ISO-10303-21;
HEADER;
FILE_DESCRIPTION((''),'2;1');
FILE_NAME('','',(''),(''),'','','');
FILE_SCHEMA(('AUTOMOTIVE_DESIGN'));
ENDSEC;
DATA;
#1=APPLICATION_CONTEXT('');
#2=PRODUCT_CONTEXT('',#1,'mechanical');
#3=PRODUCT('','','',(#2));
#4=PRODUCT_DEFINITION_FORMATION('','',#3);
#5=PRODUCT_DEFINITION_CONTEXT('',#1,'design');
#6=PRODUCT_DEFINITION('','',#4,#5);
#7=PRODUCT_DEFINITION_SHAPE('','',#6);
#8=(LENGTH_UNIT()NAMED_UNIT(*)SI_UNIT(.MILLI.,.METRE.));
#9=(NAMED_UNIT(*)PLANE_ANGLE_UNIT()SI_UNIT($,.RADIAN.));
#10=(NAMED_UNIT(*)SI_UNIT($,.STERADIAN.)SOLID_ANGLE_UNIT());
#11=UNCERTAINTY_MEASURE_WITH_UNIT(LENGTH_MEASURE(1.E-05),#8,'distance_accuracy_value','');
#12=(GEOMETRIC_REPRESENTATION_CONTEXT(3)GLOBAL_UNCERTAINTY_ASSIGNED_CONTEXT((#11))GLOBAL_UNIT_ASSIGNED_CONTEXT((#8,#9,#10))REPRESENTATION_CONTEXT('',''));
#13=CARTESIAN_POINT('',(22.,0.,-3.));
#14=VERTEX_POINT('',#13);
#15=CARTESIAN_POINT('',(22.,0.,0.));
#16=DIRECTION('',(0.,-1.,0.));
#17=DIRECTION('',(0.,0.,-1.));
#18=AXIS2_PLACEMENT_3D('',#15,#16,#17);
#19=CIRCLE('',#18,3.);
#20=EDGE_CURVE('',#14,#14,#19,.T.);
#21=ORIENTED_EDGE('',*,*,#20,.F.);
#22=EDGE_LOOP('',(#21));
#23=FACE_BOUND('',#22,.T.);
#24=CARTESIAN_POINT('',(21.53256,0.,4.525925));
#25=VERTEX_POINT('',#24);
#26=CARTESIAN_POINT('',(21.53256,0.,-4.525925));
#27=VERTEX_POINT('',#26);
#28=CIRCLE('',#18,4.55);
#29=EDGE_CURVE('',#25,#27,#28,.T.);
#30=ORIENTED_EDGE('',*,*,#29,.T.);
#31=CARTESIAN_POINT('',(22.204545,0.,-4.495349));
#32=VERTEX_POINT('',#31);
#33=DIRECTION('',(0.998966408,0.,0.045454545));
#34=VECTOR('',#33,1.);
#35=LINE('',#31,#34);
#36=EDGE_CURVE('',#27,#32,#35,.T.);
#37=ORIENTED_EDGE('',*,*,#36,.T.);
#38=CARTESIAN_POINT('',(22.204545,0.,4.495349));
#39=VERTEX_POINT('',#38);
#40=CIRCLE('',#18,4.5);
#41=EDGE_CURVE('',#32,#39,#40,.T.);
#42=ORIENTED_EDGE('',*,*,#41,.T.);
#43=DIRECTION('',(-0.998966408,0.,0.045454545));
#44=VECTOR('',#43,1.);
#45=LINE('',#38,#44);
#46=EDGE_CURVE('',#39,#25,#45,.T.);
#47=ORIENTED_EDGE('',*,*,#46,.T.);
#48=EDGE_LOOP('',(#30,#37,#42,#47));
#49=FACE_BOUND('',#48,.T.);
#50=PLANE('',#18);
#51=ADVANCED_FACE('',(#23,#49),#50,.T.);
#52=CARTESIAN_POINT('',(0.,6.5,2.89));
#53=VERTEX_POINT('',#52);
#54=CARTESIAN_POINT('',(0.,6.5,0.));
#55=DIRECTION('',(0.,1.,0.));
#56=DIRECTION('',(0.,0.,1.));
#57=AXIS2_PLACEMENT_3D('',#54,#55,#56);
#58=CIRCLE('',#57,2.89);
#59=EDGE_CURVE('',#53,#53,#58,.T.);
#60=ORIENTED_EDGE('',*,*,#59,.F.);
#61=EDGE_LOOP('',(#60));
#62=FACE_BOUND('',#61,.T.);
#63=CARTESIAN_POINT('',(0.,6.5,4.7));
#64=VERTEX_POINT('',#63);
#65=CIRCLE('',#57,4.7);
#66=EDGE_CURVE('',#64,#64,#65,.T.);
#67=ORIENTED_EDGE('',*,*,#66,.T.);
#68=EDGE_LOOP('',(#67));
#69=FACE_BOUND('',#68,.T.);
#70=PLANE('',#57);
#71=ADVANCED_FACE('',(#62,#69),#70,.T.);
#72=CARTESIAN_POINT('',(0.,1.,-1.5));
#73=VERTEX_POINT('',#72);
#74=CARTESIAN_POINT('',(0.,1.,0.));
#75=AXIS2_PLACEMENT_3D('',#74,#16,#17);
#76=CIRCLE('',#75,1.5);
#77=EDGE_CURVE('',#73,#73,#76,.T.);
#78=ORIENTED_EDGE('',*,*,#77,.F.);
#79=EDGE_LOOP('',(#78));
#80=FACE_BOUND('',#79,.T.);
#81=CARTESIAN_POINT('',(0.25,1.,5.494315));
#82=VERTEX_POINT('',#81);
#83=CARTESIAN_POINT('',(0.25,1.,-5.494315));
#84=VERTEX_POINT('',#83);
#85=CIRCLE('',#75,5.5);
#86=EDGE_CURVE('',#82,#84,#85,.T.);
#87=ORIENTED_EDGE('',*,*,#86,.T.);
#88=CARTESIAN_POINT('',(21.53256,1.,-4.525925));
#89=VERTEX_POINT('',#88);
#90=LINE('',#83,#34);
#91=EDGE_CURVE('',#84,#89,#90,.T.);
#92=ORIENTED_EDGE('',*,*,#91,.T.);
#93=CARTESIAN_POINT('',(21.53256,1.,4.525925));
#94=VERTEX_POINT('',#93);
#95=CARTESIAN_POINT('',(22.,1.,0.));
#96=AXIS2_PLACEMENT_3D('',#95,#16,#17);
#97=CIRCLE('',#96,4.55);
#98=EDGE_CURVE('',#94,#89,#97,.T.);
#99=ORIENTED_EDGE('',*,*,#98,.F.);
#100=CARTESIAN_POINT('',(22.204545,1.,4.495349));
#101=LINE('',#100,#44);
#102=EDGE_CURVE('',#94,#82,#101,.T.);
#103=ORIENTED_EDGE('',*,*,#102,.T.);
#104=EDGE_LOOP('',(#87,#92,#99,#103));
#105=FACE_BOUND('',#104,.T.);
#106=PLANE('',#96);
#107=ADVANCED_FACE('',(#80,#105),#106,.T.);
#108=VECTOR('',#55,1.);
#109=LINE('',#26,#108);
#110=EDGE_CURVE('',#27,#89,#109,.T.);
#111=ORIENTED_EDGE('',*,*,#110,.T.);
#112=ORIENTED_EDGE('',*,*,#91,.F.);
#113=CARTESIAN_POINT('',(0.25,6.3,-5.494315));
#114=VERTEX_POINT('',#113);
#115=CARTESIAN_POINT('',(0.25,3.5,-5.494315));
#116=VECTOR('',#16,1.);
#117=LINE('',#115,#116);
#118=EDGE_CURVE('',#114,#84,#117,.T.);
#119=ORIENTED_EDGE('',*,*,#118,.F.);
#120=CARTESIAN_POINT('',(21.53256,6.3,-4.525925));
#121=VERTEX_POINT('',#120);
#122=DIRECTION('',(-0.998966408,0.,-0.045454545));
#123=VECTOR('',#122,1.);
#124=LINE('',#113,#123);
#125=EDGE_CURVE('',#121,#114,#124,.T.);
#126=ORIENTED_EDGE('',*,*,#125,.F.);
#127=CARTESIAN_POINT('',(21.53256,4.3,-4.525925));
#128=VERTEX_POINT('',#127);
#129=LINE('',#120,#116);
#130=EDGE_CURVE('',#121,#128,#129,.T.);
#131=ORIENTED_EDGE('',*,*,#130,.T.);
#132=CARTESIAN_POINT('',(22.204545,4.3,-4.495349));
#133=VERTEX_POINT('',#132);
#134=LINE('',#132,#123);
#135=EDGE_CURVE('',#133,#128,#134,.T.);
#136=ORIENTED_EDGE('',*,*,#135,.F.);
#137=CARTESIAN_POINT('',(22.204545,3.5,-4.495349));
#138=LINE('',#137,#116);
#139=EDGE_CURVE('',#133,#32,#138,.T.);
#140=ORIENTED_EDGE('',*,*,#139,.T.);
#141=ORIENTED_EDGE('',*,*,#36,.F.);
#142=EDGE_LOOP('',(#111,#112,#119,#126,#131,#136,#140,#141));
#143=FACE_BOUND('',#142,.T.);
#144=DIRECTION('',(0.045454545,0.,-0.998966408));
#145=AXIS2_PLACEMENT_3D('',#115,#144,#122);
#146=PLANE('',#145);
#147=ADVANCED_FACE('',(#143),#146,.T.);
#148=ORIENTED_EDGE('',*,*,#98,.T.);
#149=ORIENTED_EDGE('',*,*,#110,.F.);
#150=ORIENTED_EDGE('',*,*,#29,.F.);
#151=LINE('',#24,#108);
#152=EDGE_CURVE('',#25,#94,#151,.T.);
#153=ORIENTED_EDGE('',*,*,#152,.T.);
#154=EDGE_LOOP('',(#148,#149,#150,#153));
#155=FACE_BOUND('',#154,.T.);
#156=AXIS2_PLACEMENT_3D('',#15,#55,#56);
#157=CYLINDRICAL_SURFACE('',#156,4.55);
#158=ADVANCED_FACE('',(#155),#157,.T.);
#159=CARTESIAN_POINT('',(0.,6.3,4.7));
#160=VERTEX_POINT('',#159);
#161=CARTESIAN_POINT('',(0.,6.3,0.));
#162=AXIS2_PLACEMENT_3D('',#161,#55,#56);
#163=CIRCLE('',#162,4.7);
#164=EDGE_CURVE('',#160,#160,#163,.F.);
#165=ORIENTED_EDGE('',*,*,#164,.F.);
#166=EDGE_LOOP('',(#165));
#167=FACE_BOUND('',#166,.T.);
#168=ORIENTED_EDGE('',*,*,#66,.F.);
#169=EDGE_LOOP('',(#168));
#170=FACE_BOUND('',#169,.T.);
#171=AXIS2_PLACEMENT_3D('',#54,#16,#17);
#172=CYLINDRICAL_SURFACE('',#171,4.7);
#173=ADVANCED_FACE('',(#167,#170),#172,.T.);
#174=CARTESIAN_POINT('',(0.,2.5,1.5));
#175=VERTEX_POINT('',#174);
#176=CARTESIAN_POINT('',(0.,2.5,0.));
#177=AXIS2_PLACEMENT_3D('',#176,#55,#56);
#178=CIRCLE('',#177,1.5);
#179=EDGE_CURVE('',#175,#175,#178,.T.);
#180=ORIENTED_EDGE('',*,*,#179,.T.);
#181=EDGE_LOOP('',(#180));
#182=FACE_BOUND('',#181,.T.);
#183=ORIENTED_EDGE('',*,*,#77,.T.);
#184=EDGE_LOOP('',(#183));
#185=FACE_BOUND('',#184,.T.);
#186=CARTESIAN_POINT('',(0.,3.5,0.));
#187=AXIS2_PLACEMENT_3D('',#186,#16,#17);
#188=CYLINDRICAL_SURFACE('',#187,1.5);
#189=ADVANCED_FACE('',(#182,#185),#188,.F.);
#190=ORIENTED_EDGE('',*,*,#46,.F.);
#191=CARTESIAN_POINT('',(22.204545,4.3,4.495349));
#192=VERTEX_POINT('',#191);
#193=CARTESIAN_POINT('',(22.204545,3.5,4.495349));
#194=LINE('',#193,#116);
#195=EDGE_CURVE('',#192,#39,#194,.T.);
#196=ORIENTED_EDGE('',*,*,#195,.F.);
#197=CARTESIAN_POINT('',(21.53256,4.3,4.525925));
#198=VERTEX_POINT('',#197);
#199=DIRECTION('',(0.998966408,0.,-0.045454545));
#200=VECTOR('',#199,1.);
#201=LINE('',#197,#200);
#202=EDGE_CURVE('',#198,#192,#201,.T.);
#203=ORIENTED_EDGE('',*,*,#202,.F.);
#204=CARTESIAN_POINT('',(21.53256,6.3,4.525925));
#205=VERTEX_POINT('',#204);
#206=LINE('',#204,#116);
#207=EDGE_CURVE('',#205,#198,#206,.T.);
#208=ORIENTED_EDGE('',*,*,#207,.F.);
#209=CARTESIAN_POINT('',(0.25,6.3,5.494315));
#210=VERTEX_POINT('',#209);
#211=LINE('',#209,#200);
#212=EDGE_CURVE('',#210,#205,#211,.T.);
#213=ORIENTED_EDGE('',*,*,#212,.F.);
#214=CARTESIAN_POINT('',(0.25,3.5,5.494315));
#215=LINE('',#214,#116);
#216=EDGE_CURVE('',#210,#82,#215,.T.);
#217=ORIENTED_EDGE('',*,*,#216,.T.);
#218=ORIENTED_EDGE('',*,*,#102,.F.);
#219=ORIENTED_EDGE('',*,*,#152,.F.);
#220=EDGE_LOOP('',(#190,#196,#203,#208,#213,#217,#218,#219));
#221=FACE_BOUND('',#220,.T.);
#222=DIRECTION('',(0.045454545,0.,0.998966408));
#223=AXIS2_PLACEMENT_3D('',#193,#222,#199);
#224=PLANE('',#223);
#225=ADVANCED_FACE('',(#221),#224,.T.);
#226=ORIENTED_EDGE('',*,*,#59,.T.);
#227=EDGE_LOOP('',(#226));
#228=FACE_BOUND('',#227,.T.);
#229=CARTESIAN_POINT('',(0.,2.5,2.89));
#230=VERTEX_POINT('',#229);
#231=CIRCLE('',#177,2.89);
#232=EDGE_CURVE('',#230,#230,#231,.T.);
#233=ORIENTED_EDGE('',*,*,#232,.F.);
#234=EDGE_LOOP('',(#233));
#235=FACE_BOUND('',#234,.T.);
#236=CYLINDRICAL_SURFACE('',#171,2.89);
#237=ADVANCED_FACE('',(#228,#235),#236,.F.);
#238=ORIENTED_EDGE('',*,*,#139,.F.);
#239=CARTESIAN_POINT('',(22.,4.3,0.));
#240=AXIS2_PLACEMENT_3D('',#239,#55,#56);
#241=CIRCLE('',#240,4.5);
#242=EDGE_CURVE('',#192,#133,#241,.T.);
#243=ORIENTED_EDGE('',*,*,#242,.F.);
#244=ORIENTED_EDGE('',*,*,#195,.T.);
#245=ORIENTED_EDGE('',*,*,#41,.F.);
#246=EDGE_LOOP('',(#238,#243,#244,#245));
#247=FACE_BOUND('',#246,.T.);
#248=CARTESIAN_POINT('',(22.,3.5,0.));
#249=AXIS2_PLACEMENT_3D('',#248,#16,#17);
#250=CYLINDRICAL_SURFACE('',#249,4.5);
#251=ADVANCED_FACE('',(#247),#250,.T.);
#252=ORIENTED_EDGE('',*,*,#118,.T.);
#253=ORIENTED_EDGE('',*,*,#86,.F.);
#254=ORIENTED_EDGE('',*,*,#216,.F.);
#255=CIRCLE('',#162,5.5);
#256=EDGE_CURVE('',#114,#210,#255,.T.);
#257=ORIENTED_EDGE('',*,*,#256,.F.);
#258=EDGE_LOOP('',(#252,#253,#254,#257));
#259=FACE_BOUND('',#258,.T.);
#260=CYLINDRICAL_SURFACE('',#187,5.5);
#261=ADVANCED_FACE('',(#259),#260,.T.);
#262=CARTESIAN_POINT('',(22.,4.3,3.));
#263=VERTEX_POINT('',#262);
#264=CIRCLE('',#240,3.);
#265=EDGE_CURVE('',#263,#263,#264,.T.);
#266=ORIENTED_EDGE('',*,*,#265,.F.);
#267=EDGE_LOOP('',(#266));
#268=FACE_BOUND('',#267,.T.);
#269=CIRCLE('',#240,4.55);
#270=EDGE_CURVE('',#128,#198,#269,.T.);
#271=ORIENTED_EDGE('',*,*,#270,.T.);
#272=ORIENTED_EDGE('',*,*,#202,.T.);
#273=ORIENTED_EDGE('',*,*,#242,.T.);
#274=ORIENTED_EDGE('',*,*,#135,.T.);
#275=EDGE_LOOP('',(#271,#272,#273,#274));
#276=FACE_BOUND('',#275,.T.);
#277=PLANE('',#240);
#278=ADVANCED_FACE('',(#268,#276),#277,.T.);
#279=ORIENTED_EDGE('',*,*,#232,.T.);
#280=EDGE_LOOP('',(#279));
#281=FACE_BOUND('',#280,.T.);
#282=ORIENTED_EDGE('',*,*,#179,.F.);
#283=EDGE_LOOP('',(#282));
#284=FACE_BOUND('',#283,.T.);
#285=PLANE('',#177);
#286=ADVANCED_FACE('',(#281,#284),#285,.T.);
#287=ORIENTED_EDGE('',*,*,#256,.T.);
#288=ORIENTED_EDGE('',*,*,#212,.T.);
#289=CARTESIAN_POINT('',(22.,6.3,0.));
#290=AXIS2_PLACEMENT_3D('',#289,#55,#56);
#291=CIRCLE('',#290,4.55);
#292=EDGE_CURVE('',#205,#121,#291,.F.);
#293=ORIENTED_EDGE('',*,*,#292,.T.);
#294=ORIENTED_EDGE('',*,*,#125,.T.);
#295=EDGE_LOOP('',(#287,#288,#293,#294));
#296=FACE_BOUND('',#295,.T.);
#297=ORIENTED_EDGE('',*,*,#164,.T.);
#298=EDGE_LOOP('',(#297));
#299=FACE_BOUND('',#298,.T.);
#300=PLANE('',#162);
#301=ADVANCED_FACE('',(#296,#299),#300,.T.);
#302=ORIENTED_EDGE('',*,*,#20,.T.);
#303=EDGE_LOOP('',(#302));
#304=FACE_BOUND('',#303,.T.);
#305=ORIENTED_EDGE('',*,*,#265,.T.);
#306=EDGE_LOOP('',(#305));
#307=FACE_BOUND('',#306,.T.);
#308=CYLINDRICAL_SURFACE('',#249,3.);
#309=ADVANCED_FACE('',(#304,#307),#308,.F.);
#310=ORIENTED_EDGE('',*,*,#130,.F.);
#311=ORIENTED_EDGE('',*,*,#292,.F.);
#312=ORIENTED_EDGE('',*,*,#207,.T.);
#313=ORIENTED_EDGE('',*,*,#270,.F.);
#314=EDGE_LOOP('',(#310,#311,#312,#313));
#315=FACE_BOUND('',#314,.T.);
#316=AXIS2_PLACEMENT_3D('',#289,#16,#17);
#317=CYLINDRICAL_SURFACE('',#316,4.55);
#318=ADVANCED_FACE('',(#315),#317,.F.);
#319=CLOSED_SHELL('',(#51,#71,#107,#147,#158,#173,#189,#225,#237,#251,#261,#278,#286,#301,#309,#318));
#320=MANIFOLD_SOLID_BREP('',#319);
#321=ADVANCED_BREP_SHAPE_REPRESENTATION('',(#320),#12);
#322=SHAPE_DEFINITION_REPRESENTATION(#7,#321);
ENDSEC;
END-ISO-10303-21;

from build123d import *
from build123d.topology import SkipClean

# Parameters (mm, degrees)
SKETCH1_R               = 1.5
SKETCH1_R_2             = 3
BOSS_EXTRUDE1_DEPTH     = 3.5
SKETCH2_R               = 4.7
SKETCH2_R_2             = 2.89
BOSS_EXTRUDE2_DEPTH     = 3
CUT_EXTRUDE1_START      = -1
SKETCH3_R               = 2.89
CUT_EXTRUDE1_DEPTH      = 1
SKETCH4_R               = 3
SKETCH4_R_2             = 4.7
BOSS_EXTRUDE3_DEPTH     = 1.8
CUT_EXTRUDE2_DEPTH      = 1
BOSS_EXTRUDE4_OUTLINE_R = 4.7
BOSS_EXTRUDE4_DEPTH     = 1
CUT_EXTRUDE3_START      = -1
SKETCH7_R               = 3
CUT_EXTRUDE3_DEPTH      = 1
BOSS_EXTRUDE5_START     = -5.3
SKETCH7_2_R             = 3
BOSS_EXTRUDE5_DEPTH     = 1


# Read off the part's stored shape, not the designer's step: Boss-Extrude4
with BuildPart() as part:
    # Sketch1 → Boss-Extrude1 (new body)
    with BuildSketch(Plane(origin=(0, 0, 0), x_dir=(1, 0, 0), z_dir=(0, 1, 0))):
        with BuildLine():
            Line((0.25, 5.494315244), (22.204545455, 4.495348836))
            ThreePointArc((22.204545455, 4.495348836), (26.5, 0), (22.204545455, -4.495348836))
            Line((22.204545455, -4.495348836), (0.25, -5.494315244))
            ThreePointArc((0.25, -5.494315244), (-5.5, 0), (0.25, 5.494315244))
        make_face()
        with Locations(Location((0, 0, 0), (0, 0, 270))):
            Circle(SKETCH1_R, mode=Mode.SUBTRACT)
        with Locations(Location((22, 0, 0), (0, 0, 270))):
            Circle(SKETCH1_R_2, mode=Mode.SUBTRACT)
    extrude(amount=BOSS_EXTRUDE1_DEPTH)

    # Sketch2 → Boss-Extrude2 (add)
    with BuildSketch(Plane(origin=(0, 3.5, 0), x_dir=(1, 0, 0), z_dir=(0, 1, 0))):
        with Locations(Location((0, 0, 0), (0, 0, 90))):
            Circle(SKETCH2_R)
        with Locations(Location((0, 0, 0), (0, 0, 270))):
            Circle(SKETCH2_R_2, mode=Mode.SUBTRACT)
    extrude(amount=BOSS_EXTRUDE2_DEPTH)

    # Sketch3 → Cut-Extrude1 (cut)
    with BuildSketch(Plane(origin=(0, 3.5, 0), x_dir=(1, 0, 0), z_dir=(0, 1, 0)).offset(CUT_EXTRUDE1_START)):
        with Locations(Location((0, 0, 0), (0, 0, 270))):
            Circle(SKETCH3_R)
    extrude(amount=CUT_EXTRUDE1_DEPTH, mode=Mode.SUBTRACT)

    # Sketch4 → Boss-Extrude3 (add)
    with SkipClean():  # the faces are left unmerged after this step: merging them gives an invalid solid
        with BuildSketch(Plane(origin=(0, 3.5, 0), x_dir=(1, 0, 0), z_dir=(0, 1, 0))):
            with BuildLine():
                Line((0.25, -5.494315244), (22.204545455, -4.495348836))
                ThreePointArc((22.204545455, -4.495348836), (26.5, 0), (22.204545455, 4.495348836))
                Line((22.204545455, 4.495348836), (0.25, 5.494315244))
                ThreePointArc((0.25, 5.494315244), (-5.5, 0), (0.25, -5.494315244))
            make_face()
            with Locations(Location((22, 0, 0), (0, 0, 270))):
                Circle(SKETCH4_R, mode=Mode.SUBTRACT)
            with Locations(Location((0, 0, 0), (0, 0, 270))):
                Circle(SKETCH4_R_2, mode=Mode.SUBTRACT)
        extrude(amount=BOSS_EXTRUDE3_DEPTH)

    # Sketch5 → Cut-Extrude2 (cut)
    with SkipClean():  # the faces are left unmerged after this step: merging them gives an invalid solid
        with BuildSketch(Plane.XZ):
            with BuildLine():
                Line((22.204545455, 4.495348836), (0.25, 5.494315244))
                ThreePointArc((0.25, 5.494315244), (-5.5, 0), (0.25, -5.494315244))
                Line((0.25, -5.494315244), (22.204545455, -4.495348836))
                ThreePointArc((22.204545455, -4.495348836), (26.5, 0), (22.204545455, 4.495348836))
            make_face()
        extrude(amount=-CUT_EXTRUDE2_DEPTH, mode=Mode.SUBTRACT)

    # Boss-Extrude4 outline → Boss-Extrude4 (add)
    with SkipClean():  # the faces are left unmerged after this step: merging them gives an invalid solid
        with BuildSketch(Plane(origin=(0, 5.3, 0), x_dir=(1, 0, 0), z_dir=(0, 1, 0))):
            with BuildLine():
                ThreePointArc((21.53255953, -4.525925254), (17.45, 0), (21.53255953, 4.525925254))
                Line((21.53255953, 4.525925254), (0.25, 5.494315244))
                ThreePointArc((0.25, 5.494315244), (-5.5, 0), (0.25, -5.494315244))
                Line((0.25, -5.494315244), (21.53255953, -4.525925254))
            make_face()
            Circle(BOSS_EXTRUDE4_OUTLINE_R, mode=Mode.SUBTRACT)
        extrude(amount=BOSS_EXTRUDE4_DEPTH)

    # Sketch7 → Cut-Extrude3 (cut)
    with SkipClean():  # the faces are left unmerged after this step: merging them gives an invalid solid
        with BuildSketch(Plane(origin=(0, 5.3, 0), x_dir=(1, 0, 0), z_dir=(0, 1, 0)).offset(CUT_EXTRUDE3_START)):
            with BuildLine():
                Line((22.204545455, 4.495348836), (21.53255953, 4.525925254))
                ThreePointArc((21.53255953, 4.525925254), (17.45, 0), (21.53255953, -4.525925254))
                Line((21.53255953, -4.525925254), (22.204545455, -4.495348836))
                ThreePointArc((22.204545455, -4.495348836), (26.5, 0), (22.204545455, 4.495348836))
            make_face()
            with Locations(Location((22, 0, 0), (0, 0, 90))):
                Circle(SKETCH7_R, mode=Mode.SUBTRACT)
        extrude(amount=CUT_EXTRUDE3_DEPTH, mode=Mode.SUBTRACT)

    # Sketch7<2> → Boss-Extrude5 (add)
    with SkipClean():  # the faces are left unmerged after this step: merging them gives an invalid solid
        with BuildSketch(Plane(origin=(0, 5.3, 0), x_dir=(1, 0, 0), z_dir=(0, 1, 0)).offset(BOSS_EXTRUDE5_START)):
            with BuildLine():
                Line((22.204545455, 4.495348836), (21.53255953, 4.525925254))
                ThreePointArc((21.53255953, 4.525925254), (17.45, 0), (21.53255953, -4.525925254))
                Line((21.53255953, -4.525925254), (22.204545455, -4.495348836))
                ThreePointArc((22.204545455, -4.495348836), (26.5, 0), (22.204545455, 4.495348836))
            make_face()
            with Locations(Location((22, 0, 0), (0, 0, 90))):
                Circle(SKETCH7_2_R, mode=Mode.SUBTRACT)
        extrude(amount=BOSS_EXTRUDE5_DEPTH)


solid = part.part
